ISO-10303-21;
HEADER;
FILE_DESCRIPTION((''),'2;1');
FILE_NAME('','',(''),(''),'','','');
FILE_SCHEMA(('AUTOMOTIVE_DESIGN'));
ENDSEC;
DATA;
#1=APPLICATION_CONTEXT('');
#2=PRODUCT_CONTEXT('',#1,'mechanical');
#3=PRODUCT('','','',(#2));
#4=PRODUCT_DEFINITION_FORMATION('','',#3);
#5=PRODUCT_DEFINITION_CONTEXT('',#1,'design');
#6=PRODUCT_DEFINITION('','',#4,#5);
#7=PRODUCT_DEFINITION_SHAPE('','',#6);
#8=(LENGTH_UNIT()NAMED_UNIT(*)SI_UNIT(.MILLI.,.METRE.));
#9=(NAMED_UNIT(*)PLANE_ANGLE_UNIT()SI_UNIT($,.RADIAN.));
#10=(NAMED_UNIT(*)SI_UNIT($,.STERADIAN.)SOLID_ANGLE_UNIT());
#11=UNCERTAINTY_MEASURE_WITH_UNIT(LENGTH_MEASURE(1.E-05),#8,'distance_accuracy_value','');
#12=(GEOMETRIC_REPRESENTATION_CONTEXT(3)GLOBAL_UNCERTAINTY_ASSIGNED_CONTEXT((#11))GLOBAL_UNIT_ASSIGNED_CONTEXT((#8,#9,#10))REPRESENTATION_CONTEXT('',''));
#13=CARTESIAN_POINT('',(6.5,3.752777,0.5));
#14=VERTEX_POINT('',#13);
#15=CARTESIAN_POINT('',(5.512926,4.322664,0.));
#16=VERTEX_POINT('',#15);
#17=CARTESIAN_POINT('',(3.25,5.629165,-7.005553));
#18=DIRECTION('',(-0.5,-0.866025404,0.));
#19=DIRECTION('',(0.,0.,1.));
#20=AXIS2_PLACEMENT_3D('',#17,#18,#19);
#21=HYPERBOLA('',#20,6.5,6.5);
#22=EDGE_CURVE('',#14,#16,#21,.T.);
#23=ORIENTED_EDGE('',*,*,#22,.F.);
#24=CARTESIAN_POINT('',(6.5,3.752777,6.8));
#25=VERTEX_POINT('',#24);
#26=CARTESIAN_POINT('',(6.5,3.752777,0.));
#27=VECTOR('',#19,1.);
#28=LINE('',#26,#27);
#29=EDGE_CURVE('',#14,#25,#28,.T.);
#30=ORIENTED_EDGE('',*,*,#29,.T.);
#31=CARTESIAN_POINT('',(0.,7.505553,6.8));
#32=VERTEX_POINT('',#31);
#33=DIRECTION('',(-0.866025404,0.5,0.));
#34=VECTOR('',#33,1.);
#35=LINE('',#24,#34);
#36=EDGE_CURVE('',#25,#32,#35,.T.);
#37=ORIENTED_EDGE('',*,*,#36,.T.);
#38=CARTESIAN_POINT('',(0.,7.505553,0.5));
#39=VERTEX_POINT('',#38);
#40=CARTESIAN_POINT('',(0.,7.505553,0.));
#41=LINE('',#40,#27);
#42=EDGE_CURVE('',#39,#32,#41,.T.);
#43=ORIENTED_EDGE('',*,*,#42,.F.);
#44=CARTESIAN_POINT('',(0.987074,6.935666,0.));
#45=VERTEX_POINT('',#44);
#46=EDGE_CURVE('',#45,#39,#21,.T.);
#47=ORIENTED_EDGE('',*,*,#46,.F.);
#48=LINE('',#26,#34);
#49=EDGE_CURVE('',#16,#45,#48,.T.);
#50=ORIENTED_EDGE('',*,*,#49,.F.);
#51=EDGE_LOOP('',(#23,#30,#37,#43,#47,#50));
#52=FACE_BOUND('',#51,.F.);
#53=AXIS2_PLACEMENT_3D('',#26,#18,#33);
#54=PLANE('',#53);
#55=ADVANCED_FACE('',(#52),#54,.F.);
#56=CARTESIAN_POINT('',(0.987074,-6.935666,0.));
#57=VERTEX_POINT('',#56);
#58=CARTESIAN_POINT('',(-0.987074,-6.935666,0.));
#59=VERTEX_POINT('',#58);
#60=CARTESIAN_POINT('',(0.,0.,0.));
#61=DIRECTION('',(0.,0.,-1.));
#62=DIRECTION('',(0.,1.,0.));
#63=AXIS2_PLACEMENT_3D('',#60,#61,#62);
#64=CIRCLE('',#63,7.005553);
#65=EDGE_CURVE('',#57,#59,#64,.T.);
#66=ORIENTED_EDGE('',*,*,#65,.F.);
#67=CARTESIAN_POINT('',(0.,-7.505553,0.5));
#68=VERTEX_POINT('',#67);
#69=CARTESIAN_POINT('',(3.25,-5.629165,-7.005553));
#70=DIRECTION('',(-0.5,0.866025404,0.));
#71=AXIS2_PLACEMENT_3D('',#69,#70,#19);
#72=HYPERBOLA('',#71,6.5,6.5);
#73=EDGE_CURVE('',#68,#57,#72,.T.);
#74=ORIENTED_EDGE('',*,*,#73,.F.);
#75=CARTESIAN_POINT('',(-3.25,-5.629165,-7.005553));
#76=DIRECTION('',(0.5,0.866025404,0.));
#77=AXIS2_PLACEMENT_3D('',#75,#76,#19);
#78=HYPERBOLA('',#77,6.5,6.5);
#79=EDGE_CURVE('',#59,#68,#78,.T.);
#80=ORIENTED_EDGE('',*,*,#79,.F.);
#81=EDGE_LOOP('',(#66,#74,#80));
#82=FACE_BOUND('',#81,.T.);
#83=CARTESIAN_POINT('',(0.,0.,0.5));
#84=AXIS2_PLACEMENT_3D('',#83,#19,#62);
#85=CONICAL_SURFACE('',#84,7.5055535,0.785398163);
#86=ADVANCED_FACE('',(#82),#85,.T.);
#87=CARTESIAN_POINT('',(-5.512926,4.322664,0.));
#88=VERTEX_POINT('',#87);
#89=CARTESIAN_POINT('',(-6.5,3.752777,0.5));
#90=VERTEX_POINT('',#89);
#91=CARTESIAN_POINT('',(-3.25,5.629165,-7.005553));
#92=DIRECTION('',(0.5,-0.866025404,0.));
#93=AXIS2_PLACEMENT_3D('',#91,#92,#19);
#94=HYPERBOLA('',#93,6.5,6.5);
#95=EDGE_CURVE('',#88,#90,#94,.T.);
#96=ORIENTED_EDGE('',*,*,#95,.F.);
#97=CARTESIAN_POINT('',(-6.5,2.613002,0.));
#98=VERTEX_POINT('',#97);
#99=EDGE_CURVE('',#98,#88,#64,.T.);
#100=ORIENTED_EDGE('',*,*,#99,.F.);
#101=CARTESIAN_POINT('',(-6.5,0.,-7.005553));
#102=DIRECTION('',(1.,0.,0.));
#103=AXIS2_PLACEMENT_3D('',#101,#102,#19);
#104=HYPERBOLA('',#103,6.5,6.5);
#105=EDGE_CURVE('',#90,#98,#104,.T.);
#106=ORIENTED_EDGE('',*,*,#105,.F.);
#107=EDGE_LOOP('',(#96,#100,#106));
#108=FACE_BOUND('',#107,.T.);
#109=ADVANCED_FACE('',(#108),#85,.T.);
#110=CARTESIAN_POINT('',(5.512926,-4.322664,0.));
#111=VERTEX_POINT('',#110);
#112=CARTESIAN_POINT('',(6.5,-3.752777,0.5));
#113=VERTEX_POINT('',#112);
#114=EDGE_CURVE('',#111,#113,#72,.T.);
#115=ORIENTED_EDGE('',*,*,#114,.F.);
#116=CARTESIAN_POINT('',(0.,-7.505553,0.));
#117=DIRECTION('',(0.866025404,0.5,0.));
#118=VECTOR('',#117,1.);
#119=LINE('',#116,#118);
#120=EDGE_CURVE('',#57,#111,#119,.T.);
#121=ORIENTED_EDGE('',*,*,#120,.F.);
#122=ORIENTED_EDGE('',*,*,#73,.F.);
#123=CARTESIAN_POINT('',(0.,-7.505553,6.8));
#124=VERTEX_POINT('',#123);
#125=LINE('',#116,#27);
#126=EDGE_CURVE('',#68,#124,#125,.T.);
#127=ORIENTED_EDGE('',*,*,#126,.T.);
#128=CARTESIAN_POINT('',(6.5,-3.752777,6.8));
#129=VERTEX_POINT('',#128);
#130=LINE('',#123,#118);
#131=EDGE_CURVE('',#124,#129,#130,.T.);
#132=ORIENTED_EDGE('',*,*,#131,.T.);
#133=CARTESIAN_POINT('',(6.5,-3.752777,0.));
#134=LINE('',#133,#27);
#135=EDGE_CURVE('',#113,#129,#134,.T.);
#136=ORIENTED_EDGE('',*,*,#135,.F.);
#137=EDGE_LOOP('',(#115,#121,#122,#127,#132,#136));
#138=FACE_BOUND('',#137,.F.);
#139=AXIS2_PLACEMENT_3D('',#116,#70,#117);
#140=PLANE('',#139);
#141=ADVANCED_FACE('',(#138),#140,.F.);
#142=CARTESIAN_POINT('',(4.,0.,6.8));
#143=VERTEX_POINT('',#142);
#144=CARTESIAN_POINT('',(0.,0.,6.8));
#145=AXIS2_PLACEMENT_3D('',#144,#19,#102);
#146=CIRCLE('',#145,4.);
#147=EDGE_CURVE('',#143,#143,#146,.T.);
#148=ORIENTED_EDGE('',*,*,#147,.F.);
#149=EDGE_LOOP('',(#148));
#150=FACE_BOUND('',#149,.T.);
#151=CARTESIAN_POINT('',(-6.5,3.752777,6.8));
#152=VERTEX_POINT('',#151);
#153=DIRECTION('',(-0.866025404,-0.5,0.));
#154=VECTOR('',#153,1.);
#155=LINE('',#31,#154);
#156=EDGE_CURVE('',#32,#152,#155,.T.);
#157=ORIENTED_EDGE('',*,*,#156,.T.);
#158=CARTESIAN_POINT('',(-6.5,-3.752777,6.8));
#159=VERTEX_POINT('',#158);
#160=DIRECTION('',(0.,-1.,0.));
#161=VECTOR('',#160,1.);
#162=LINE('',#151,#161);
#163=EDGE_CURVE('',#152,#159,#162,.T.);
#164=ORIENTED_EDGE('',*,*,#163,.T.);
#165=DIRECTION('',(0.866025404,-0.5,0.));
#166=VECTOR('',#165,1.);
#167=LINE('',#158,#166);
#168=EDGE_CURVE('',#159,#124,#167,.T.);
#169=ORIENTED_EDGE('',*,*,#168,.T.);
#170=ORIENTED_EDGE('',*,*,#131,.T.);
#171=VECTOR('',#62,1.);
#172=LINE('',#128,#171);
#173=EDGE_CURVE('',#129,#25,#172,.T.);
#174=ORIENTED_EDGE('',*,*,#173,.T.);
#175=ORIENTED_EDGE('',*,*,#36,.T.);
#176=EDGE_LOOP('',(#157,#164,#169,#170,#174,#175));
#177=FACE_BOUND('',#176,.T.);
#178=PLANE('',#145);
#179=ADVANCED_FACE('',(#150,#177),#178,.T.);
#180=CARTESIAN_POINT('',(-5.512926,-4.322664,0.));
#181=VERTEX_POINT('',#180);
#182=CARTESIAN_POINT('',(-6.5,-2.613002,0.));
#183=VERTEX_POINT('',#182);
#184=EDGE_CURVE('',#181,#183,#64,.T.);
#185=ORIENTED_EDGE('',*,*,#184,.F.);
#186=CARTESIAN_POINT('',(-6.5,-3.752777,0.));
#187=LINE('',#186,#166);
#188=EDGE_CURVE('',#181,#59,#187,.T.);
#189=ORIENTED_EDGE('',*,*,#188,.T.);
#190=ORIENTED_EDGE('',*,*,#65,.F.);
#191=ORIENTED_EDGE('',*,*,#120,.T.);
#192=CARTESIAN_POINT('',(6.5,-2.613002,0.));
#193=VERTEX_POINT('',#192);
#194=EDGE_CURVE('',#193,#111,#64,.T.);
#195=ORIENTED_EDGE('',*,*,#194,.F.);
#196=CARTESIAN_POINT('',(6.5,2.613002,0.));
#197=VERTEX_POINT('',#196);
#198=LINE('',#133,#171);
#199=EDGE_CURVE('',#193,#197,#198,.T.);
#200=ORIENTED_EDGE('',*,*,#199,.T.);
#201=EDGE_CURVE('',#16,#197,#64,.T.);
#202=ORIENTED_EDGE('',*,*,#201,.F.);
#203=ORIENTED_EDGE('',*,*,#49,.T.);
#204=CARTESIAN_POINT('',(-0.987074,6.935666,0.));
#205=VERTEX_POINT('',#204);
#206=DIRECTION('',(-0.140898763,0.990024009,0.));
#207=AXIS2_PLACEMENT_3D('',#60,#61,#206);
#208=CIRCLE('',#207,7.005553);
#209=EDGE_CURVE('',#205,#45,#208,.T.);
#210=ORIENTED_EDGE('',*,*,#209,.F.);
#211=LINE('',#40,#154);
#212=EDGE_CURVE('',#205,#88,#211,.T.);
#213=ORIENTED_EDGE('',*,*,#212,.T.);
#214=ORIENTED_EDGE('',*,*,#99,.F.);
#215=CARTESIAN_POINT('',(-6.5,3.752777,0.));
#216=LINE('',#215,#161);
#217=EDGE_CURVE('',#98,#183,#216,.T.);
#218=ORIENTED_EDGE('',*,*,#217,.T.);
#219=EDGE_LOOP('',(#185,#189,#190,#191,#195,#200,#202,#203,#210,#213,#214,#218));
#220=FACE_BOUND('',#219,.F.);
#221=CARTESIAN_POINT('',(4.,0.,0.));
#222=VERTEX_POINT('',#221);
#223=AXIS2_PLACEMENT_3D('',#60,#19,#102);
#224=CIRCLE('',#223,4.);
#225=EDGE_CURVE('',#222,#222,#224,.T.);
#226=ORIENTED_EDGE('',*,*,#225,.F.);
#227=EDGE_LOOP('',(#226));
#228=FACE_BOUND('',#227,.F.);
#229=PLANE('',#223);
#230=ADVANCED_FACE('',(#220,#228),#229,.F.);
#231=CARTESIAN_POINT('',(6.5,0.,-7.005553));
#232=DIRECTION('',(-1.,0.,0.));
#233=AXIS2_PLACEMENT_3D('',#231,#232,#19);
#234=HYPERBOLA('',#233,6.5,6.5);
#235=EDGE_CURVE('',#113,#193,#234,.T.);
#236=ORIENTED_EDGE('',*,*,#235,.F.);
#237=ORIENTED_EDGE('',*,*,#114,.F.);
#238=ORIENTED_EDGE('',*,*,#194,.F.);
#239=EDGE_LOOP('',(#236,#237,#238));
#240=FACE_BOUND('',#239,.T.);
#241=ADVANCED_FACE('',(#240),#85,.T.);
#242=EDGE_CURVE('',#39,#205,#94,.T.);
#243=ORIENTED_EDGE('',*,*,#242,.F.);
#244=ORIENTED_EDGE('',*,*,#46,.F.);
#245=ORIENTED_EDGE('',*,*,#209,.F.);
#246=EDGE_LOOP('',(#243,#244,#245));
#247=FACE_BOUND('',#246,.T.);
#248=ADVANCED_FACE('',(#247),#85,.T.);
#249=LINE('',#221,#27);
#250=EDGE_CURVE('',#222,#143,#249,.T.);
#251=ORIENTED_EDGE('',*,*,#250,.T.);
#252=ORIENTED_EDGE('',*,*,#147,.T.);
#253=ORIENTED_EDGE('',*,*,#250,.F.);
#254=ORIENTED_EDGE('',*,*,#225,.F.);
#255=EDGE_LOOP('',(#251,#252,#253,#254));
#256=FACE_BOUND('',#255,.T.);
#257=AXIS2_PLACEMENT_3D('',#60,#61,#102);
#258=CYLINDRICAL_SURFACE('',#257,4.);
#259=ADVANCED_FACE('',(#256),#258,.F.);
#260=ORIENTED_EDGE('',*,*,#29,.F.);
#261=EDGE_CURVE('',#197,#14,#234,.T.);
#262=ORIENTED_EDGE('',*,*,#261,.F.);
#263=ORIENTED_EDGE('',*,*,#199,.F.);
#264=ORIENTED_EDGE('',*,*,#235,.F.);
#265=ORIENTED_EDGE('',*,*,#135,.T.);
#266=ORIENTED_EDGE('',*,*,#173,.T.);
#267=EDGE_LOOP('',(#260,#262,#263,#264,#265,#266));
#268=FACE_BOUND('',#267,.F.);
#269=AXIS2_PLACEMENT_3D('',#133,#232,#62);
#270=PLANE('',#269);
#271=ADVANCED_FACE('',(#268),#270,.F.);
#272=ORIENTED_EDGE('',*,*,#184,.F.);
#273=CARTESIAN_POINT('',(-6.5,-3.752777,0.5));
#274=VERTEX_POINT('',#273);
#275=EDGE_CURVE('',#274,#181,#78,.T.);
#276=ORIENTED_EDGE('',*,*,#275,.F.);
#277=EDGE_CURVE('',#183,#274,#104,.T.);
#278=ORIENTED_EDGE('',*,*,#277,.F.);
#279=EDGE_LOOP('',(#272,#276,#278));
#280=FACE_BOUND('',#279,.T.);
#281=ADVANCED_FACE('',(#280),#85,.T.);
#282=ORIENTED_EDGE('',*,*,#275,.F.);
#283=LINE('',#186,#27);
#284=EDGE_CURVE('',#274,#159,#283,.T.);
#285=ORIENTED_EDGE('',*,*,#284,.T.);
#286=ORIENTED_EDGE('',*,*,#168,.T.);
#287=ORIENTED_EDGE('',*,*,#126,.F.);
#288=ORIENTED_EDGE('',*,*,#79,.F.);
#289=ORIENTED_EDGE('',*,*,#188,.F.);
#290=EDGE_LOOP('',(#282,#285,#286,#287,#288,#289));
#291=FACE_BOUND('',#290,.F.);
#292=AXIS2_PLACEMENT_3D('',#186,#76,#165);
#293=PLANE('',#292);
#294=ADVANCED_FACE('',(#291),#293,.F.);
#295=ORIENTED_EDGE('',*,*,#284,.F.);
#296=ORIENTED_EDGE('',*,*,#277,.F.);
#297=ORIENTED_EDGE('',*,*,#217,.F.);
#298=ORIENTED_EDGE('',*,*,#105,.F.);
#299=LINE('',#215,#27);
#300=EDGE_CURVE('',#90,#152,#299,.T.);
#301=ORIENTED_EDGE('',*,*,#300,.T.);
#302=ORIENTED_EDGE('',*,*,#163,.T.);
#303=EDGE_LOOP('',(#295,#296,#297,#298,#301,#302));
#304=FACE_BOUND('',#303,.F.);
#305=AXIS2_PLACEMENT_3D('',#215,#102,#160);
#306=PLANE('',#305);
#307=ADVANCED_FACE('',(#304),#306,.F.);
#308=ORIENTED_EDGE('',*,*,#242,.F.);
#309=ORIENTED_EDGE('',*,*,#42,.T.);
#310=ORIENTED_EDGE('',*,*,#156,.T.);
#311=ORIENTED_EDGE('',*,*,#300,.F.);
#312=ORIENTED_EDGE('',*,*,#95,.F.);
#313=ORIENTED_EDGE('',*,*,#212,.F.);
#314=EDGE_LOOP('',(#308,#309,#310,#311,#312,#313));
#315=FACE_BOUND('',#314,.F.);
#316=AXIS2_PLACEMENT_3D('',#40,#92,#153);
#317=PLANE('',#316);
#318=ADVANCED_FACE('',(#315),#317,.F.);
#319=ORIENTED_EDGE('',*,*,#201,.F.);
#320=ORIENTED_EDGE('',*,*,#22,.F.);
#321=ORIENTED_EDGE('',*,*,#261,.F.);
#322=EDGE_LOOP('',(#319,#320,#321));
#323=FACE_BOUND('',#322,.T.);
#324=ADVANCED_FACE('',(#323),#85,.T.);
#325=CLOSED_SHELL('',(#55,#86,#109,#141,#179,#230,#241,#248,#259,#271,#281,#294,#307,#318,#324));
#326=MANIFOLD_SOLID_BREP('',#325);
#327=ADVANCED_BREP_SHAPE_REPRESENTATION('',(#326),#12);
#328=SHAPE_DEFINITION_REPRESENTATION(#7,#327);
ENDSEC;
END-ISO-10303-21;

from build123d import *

# Parameters (mm, degrees)
F0_R     = 4
F1_DEPTH = 6.8


with BuildPart() as f1:
    # F0 (on Top) → F1 (new body)
    with BuildSketch(Plane.XY):
        Polygon((-6.5, 3.7527767497), (-6.5, -3.7527767497), (0, -7.5055534995), (6.5, -3.7527767497), (6.5, 3.7527767497), (0, 7.5055534995), align=None)
        Circle(F0_R, mode=Mode.SUBTRACT)
    extrude(amount=F1_DEPTH)

    # F2 (on Right) → F3 (revolve, cut)
    with BuildSketch(Plane.YZ):
        Polygon((7.0055534995, 0), (7.5055534995, 0), (7.5055534995, 0.5), align=None)
    revolve(axis=Axis((0, 0, 0), (0, 0, -1)), mode=Mode.SUBTRACT)


solid = f1.part
